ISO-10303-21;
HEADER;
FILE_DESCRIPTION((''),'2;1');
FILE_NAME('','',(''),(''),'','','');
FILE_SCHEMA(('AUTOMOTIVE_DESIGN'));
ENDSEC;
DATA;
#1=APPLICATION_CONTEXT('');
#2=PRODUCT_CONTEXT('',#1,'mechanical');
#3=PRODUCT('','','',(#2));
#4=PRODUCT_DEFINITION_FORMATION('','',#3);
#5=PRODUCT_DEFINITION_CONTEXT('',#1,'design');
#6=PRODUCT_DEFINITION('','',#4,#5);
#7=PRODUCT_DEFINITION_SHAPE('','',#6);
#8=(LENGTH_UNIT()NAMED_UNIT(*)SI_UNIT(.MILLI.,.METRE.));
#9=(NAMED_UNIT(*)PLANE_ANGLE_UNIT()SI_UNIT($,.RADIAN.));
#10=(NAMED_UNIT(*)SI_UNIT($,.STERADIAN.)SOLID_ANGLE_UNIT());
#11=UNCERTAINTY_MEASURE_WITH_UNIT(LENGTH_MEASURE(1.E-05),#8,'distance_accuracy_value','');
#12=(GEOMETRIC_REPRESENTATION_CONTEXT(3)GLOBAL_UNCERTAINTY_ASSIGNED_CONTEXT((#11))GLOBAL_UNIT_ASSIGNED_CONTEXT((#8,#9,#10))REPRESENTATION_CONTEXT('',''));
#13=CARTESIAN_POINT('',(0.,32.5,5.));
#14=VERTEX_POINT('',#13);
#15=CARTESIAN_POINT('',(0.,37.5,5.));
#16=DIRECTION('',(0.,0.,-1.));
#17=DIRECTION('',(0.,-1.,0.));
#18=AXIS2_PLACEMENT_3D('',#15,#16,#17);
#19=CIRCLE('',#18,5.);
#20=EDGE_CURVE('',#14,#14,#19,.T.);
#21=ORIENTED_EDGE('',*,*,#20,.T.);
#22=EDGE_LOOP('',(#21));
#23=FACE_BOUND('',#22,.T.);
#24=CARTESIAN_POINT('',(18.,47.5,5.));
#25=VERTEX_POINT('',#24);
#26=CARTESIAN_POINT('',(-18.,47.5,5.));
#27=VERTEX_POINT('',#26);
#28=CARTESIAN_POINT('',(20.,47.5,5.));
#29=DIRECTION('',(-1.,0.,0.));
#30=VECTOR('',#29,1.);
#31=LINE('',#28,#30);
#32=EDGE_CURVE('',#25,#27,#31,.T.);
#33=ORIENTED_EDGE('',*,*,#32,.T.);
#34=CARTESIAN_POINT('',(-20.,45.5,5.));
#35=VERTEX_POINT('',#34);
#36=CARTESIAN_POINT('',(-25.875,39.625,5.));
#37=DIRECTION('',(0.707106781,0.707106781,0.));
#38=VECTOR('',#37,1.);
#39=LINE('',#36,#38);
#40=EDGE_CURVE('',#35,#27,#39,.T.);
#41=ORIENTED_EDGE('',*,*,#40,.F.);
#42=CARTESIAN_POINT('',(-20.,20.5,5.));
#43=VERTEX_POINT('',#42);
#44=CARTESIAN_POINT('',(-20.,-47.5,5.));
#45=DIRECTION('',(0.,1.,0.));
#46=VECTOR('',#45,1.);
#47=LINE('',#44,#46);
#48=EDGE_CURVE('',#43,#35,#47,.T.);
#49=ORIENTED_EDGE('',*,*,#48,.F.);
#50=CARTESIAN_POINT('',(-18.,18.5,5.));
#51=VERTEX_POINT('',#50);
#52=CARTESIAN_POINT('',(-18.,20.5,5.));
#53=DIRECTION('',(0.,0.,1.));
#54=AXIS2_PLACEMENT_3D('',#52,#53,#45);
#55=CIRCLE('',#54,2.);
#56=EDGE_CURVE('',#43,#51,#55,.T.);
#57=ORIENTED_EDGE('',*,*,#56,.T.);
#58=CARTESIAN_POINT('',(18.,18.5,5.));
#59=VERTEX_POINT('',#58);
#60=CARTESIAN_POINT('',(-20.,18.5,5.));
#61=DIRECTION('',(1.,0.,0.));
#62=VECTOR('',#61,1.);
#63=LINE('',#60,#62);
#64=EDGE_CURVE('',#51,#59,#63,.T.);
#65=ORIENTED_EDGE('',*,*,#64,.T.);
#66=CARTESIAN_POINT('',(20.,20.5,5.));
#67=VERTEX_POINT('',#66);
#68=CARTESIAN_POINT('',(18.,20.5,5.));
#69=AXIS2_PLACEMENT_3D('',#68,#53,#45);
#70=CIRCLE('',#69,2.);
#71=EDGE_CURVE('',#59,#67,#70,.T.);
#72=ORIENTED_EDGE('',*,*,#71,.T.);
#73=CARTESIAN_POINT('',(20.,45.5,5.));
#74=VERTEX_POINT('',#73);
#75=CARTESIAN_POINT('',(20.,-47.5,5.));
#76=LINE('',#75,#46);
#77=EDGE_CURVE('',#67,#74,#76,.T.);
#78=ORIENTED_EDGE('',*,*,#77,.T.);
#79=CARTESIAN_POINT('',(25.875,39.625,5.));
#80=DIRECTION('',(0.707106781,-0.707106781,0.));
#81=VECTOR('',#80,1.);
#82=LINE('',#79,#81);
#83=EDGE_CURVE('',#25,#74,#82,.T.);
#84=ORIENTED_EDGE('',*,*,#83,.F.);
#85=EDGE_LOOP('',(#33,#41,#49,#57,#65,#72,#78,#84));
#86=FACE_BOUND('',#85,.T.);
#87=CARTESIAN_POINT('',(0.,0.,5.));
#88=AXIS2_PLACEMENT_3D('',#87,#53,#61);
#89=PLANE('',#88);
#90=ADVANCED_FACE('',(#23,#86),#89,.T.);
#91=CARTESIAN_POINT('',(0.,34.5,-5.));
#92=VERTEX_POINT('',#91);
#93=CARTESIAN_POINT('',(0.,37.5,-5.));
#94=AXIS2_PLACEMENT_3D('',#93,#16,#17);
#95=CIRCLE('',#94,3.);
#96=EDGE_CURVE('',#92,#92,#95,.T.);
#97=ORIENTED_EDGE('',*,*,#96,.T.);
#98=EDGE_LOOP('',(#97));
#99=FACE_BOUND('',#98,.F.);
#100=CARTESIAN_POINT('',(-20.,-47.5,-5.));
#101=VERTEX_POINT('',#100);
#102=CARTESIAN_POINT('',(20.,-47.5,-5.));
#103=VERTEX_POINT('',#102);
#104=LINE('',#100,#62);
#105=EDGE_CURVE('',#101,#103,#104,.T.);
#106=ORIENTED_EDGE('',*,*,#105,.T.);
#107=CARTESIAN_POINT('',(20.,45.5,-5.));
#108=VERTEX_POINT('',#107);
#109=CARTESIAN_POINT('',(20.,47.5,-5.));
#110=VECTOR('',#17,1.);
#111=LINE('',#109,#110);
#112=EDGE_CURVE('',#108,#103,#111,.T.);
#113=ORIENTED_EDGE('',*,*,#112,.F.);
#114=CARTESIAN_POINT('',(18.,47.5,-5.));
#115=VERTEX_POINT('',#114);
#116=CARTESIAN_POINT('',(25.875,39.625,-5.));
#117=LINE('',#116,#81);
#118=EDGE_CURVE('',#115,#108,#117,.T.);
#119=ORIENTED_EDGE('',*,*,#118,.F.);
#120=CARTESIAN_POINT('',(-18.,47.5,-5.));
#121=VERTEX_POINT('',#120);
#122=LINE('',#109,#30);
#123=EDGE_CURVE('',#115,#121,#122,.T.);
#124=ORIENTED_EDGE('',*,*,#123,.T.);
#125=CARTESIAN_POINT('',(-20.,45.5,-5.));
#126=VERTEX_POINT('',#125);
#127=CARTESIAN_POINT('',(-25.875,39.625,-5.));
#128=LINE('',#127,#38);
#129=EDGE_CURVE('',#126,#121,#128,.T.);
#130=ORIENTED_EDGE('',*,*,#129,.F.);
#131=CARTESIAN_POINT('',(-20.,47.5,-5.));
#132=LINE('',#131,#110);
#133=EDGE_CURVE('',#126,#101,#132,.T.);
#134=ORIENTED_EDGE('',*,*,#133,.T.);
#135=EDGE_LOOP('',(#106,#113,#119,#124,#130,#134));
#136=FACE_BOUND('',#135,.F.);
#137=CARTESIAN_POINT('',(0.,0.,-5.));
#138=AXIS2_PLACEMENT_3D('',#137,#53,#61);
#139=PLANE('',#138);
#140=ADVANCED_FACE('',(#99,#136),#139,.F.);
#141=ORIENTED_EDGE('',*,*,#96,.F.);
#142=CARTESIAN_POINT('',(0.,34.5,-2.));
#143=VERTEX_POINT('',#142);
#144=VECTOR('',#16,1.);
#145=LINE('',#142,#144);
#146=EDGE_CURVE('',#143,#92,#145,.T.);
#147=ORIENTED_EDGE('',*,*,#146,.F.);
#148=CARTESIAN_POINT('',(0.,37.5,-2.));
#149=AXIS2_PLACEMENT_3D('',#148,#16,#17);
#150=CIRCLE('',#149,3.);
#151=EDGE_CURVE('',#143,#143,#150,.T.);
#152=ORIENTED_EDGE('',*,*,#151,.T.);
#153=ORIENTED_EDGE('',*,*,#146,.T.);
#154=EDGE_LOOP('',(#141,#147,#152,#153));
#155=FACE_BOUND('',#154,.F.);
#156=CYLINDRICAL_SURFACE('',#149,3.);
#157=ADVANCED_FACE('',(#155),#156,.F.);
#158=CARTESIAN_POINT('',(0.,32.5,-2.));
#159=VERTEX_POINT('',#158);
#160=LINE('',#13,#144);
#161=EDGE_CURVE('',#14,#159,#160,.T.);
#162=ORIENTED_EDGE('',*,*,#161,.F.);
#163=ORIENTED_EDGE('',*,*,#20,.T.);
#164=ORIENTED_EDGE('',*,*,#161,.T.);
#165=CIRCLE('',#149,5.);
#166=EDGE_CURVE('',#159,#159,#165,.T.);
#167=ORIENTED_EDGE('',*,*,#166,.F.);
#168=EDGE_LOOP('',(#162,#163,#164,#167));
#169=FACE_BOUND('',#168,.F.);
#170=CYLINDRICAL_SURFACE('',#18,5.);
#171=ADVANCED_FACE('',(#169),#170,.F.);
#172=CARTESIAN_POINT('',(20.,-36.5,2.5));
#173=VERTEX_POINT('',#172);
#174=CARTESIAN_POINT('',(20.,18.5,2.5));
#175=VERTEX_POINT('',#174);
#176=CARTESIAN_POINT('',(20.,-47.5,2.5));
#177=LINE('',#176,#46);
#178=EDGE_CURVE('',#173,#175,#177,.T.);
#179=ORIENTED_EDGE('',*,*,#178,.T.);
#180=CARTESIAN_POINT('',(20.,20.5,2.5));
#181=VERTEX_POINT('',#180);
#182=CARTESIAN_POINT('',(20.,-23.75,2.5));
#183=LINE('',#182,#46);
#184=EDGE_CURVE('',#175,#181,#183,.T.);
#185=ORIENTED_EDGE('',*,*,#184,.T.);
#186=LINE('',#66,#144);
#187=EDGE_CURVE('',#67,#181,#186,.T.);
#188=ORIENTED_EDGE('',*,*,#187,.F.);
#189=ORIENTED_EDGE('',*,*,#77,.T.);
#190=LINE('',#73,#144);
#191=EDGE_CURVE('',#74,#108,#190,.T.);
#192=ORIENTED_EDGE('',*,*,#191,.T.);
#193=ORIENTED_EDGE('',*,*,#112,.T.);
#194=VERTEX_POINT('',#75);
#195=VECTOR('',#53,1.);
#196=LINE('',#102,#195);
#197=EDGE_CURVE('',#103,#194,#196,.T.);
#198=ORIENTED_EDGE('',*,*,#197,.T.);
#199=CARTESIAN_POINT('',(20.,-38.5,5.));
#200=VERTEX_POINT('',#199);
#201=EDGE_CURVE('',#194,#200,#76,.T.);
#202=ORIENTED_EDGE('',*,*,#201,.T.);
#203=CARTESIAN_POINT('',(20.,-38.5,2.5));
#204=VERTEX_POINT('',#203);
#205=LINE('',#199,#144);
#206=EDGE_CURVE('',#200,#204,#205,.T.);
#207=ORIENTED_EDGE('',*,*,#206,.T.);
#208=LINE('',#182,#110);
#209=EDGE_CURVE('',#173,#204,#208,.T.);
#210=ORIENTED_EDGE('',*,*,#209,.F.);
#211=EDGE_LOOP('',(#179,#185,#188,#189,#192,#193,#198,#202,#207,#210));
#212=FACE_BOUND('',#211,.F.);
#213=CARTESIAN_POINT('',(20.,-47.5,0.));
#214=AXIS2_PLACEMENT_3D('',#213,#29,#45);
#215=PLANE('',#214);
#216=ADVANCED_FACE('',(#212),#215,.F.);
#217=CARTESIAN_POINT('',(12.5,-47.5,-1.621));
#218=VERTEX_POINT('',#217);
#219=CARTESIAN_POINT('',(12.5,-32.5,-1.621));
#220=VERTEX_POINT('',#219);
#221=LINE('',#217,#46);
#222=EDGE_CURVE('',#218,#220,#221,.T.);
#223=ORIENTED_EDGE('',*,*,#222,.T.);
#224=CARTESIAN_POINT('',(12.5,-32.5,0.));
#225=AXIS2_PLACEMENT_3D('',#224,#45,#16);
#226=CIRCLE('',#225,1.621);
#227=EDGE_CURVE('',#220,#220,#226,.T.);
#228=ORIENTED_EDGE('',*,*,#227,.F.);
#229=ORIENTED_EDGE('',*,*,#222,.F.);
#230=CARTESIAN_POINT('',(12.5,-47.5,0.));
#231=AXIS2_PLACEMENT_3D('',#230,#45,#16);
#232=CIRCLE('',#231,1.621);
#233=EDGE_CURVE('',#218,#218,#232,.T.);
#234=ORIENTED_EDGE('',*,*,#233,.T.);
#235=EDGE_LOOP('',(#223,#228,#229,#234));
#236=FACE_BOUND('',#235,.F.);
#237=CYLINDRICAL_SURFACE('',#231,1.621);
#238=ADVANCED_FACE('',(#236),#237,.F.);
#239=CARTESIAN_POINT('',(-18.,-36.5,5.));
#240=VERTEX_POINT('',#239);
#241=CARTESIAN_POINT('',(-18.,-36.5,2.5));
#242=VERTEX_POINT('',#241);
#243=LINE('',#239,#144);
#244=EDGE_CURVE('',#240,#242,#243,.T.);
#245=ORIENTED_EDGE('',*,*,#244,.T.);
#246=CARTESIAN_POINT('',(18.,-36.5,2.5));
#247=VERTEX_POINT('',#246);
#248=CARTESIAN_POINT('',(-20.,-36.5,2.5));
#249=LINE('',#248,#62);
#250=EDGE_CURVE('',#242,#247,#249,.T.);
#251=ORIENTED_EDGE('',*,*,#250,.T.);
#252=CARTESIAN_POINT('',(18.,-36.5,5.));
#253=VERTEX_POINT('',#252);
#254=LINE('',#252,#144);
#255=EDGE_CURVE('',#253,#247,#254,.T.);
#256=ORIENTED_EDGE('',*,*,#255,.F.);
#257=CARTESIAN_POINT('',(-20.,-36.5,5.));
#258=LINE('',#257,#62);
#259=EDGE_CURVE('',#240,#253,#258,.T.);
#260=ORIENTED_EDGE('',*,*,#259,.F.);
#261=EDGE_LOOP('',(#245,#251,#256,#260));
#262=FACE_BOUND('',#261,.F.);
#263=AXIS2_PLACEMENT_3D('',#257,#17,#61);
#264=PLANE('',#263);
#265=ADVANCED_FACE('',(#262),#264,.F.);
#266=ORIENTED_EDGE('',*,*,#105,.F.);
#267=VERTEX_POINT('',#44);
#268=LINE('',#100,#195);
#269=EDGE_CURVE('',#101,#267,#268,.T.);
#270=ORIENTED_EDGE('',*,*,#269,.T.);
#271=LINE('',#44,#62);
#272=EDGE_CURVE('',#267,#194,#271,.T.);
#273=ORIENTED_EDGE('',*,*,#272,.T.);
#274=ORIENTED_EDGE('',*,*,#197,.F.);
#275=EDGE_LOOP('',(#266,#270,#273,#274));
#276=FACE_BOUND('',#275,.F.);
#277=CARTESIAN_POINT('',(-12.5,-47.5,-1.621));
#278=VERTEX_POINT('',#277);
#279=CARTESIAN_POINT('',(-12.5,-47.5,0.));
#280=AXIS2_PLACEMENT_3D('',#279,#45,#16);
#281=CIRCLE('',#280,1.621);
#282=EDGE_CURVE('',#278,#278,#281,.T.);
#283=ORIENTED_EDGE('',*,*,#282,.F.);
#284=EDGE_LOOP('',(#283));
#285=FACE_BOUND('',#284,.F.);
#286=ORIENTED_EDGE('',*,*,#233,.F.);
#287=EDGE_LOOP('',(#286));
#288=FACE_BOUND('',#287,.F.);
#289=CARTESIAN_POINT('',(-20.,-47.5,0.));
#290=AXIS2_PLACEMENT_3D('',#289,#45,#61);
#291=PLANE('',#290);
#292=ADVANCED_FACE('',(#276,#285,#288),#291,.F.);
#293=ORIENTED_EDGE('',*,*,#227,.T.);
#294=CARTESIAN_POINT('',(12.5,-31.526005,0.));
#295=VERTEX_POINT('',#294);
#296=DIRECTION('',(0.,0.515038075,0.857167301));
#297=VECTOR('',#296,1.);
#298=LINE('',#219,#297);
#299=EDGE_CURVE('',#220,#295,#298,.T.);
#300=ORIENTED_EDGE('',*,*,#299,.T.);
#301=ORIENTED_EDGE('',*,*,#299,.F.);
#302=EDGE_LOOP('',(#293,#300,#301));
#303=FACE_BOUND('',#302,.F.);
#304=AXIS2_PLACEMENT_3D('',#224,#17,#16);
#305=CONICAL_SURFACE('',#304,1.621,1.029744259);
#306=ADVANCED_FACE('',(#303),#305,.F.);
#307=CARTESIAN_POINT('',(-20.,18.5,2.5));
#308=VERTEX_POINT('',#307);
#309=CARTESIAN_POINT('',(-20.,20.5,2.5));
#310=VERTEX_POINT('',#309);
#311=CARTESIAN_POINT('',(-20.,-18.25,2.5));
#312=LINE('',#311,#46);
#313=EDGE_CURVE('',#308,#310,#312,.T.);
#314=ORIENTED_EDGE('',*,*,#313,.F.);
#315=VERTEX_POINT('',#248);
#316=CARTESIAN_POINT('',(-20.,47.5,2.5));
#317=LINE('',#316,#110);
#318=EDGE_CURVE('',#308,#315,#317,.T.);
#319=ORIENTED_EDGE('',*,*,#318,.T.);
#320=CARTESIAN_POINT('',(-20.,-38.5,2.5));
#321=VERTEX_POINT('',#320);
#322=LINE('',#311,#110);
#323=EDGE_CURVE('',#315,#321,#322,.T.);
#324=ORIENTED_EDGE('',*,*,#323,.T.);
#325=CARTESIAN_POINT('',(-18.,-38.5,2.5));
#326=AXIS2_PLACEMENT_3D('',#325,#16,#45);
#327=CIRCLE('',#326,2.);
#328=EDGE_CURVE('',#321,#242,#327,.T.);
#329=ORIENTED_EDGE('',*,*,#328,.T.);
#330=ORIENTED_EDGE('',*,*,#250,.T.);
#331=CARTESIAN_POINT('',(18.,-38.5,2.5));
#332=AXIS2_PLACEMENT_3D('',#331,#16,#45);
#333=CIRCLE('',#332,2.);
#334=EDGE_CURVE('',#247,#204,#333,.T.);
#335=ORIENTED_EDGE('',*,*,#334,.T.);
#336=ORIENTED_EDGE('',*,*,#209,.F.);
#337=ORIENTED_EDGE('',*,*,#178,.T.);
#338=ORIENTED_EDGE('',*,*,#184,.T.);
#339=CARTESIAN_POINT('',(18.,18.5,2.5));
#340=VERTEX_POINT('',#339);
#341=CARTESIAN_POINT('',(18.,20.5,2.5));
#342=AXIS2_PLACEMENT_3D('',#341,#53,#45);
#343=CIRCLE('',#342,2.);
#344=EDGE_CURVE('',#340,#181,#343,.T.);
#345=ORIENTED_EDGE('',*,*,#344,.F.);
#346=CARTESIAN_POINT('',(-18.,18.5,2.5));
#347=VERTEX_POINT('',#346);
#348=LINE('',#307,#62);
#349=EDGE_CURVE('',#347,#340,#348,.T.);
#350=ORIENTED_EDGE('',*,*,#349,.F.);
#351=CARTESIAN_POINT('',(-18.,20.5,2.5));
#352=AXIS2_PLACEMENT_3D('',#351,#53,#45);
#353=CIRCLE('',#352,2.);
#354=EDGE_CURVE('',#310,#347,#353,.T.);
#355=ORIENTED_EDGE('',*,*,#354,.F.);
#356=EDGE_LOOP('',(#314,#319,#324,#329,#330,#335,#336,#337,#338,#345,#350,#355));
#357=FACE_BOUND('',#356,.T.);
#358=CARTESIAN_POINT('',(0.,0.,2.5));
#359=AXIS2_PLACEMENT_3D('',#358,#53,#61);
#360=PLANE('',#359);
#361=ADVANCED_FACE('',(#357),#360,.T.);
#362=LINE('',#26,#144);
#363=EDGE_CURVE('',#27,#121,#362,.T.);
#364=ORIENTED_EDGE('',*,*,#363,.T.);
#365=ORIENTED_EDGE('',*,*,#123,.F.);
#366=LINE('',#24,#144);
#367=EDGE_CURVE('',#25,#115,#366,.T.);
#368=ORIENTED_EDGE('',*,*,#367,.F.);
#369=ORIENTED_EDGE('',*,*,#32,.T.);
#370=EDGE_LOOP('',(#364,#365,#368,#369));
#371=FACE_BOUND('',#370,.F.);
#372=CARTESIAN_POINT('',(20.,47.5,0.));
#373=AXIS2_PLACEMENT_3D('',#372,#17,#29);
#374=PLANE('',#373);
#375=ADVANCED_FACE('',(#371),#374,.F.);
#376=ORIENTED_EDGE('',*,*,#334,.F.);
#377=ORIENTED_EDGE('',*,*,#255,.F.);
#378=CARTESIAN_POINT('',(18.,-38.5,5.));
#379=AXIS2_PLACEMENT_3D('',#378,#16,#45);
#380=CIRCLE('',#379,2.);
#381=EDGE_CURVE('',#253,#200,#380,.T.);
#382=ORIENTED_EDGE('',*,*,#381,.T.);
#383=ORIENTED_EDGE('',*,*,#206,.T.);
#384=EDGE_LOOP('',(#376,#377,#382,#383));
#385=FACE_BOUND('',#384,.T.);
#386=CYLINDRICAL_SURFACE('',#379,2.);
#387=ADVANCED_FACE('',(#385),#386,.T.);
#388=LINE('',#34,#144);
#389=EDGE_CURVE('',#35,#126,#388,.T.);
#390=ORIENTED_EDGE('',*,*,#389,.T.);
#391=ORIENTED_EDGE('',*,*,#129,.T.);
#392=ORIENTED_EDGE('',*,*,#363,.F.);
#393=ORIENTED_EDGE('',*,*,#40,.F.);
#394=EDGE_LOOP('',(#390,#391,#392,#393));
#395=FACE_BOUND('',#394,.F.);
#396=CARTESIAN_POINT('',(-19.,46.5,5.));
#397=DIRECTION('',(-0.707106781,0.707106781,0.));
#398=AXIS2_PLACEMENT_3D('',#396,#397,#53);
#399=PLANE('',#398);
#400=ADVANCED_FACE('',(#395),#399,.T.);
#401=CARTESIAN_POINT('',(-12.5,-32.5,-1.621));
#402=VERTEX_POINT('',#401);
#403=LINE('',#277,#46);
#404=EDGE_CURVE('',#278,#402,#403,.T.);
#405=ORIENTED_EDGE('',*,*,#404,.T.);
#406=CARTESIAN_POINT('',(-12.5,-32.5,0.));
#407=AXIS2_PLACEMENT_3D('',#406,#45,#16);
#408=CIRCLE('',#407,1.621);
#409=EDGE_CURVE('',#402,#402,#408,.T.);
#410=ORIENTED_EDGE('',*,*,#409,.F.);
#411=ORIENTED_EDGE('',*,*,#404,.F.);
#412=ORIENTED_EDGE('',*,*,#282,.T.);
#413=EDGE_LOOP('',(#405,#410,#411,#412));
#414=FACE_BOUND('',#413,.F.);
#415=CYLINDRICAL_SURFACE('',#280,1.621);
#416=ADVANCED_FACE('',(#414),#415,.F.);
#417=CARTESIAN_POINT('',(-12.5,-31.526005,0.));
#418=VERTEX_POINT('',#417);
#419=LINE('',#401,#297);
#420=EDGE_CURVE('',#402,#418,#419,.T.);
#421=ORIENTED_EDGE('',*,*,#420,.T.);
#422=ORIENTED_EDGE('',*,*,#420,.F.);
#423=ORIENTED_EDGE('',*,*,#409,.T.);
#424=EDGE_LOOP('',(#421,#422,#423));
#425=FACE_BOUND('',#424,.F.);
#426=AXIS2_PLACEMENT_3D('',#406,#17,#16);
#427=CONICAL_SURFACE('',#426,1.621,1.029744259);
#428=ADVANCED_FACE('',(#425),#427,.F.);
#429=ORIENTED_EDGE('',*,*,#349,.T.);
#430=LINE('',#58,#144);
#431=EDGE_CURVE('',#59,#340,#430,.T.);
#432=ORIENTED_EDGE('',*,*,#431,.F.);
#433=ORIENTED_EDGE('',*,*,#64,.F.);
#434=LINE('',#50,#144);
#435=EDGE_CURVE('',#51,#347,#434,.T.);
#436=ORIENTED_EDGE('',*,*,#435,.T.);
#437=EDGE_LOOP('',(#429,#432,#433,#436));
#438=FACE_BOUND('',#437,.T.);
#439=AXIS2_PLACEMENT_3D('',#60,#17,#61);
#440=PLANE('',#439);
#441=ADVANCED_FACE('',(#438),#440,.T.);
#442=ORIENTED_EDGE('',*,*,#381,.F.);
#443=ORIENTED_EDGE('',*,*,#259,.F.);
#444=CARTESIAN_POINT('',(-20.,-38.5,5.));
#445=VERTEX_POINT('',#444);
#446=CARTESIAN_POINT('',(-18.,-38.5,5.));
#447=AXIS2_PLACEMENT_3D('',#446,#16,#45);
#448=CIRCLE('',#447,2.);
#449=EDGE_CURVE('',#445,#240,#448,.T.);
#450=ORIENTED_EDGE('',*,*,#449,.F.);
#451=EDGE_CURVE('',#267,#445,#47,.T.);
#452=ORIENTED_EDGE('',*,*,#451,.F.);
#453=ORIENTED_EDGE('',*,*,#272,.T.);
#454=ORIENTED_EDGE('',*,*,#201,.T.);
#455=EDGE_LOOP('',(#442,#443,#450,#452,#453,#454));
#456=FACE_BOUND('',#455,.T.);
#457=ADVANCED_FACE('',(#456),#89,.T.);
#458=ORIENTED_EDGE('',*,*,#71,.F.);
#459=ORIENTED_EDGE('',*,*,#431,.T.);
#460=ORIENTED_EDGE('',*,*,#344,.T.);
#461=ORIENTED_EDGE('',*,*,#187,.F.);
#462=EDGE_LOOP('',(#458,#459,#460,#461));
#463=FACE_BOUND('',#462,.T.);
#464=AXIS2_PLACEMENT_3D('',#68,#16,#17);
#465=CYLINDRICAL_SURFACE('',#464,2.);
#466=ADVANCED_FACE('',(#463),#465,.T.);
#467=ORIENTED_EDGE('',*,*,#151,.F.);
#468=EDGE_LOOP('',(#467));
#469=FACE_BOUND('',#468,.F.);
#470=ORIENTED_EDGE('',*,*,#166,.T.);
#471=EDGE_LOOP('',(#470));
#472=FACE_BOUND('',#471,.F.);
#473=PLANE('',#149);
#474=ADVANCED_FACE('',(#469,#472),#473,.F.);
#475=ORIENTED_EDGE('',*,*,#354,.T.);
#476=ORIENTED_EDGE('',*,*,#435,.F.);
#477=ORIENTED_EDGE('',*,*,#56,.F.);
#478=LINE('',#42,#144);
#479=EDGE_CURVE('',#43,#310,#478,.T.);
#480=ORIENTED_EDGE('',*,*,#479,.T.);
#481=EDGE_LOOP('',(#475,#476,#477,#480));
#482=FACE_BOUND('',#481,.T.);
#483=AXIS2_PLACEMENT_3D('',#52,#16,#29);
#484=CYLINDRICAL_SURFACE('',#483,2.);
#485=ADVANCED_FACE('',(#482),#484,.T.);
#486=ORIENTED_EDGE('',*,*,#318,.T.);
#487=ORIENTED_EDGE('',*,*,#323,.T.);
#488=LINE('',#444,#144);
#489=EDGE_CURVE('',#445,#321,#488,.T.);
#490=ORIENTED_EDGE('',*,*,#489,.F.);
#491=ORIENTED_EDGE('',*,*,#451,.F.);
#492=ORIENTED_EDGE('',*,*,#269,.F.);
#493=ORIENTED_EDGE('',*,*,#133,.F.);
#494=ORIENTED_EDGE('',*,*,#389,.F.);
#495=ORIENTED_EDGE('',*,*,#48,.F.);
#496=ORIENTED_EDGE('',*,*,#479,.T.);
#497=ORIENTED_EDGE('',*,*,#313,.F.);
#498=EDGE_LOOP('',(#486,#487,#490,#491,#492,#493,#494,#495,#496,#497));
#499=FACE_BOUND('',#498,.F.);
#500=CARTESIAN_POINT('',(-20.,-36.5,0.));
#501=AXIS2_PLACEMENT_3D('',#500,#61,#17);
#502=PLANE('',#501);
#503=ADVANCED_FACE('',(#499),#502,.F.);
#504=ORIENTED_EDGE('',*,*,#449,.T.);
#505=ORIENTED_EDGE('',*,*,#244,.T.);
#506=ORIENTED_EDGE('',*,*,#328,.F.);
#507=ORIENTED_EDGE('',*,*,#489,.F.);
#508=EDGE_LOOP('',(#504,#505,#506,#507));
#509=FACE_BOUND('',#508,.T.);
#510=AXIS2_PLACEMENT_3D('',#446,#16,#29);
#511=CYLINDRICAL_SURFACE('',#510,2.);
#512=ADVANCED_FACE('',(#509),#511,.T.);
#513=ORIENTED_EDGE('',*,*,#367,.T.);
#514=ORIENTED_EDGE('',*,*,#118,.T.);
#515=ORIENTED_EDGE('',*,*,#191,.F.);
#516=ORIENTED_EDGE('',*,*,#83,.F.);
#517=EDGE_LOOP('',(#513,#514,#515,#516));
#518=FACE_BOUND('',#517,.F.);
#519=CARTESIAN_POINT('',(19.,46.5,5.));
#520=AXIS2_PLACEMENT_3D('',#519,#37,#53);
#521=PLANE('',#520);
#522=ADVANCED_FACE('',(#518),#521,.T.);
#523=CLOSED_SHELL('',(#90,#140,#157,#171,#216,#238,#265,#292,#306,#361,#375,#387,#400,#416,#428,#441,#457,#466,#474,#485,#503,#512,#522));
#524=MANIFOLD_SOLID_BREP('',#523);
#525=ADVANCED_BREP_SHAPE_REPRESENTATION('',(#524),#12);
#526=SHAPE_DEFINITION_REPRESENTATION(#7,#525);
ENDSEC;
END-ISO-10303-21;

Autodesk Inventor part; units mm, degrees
ref_plane "YZ Plane" through (0, 0, 0) normal (1, 0, 0) x (0, 1, 0)
ref_plane "XZ Plane" through (0, 0, 0) normal (0, 1, 0) x (-1, 0, 0)
ref_plane "XY Plane" through (0, 0, 0) normal (0, 0, 1) x (1, 0, 0)
sketch "Esboço1" plane through (0, 0, 0) normal (0, 0, 1) x (1, 0, 0)
  line L0 (-20, -47.5) -> (20, -47.5)
  line L1 (20, -47.5) -> (20, 47.5)
  line L2 (20, 47.5) -> (-20, 47.5)
  line L3 (-20, 47.5) -> (-20, -47.5)
  line L4 (-20, 47.5) -> (20, 47.5)
  circle A0 centre (0, 37.5) radius 5
  circle A1 centre (0, 37.5) radius 27.5862 construction
  circle A2 centre (0, 37.5) radius 74 construction
  line L5 (-20, 18.5) -> (20, 18.5)
  line L6 (-20, -36.5) -> (20, -36.5)
  line L7 (-103.6, 0) -> (103.6, 0) construction
  line L8 (0, -79.3) -> (0, 143.3) construction
  point P0 (0, 0)
  dimension "d0" = 95
  dimension "d1" = 40
  dimension "d41" = 10
  dimension "d42" = 85
  dimension "d43" = 55.1725
  dimension "d45" = 84
  dimension "d49" = 66
extrude "Extrusão1" add sketch "Esboço1" along normal mid plane 10 contours L3 L6 L1 L0 | L3 L5 L1 L6 | L3 L2 L1 L5 | A0
extrude "Extrusão4" cut sketch "Esboço1" against normal blind 2.5 from surface at 5 contours L3 L5 L1 L6
sketch "Esboço2" plane through (-20, -47.5, -5) normal (0, -1, 0) x (1, 0, 0)
  line L0 (40, 10) -> (40, 0)
  line L1 (40, 5) -> (0, 5) construction
  line L2 (0, 0) -> (0, 10)
  line L3 (0, 0) -> (0, 10) projected
  line L4 (40, 0) -> (40, 10) projected
  line L5 (0, 10) -> (40, 10) construction
  line L6 (20, 10) -> (20, 0) construction
  line L7 (40, 0) -> (0, 0) construction
  point P0 (20, 5)
  point P1 (7.5, 5)
  point P2 (32.5, 5)
  dimension "d9" = 7.5
  dimension "d10" = 7.5
  dimension "d37" = 25
hole "Furo1" at (-12.5, -47.5, 0) at (12.5, -47.5, 0) direction (0, 1, 0) diameter 3.242 depth 15 tip angle 118 thread size "M4x0.7" class "6H" standard "ISO Metric profile"
sketch "Esboço3" plane through (0, 0, 5) normal (0, 0, 1) x (1, 0, 0)
  point P0 (0, 0)
  point P1 (0, 37.5)
  point P2 (0, 37.5)
hole "Furo2" at (0, 37.5, 5) direction (0, 0, -1) diameter 6 end through all counterbore diameter 10 counterbore depth 7
fillet "Arredondamento3" radius 2 4 edges at (-20, 18.5, 3.75) (20, 18.5, 3.75) (-20, -36.5, 3.75) (20, -36.5, 3.75)
chamfer "Chanfro2" distance 2 angle 45 2 edges at (-20, 47.5, 0) (20, 47.5, 0)
properties part number "GRJ-03-114" material "Fenolite OR"
